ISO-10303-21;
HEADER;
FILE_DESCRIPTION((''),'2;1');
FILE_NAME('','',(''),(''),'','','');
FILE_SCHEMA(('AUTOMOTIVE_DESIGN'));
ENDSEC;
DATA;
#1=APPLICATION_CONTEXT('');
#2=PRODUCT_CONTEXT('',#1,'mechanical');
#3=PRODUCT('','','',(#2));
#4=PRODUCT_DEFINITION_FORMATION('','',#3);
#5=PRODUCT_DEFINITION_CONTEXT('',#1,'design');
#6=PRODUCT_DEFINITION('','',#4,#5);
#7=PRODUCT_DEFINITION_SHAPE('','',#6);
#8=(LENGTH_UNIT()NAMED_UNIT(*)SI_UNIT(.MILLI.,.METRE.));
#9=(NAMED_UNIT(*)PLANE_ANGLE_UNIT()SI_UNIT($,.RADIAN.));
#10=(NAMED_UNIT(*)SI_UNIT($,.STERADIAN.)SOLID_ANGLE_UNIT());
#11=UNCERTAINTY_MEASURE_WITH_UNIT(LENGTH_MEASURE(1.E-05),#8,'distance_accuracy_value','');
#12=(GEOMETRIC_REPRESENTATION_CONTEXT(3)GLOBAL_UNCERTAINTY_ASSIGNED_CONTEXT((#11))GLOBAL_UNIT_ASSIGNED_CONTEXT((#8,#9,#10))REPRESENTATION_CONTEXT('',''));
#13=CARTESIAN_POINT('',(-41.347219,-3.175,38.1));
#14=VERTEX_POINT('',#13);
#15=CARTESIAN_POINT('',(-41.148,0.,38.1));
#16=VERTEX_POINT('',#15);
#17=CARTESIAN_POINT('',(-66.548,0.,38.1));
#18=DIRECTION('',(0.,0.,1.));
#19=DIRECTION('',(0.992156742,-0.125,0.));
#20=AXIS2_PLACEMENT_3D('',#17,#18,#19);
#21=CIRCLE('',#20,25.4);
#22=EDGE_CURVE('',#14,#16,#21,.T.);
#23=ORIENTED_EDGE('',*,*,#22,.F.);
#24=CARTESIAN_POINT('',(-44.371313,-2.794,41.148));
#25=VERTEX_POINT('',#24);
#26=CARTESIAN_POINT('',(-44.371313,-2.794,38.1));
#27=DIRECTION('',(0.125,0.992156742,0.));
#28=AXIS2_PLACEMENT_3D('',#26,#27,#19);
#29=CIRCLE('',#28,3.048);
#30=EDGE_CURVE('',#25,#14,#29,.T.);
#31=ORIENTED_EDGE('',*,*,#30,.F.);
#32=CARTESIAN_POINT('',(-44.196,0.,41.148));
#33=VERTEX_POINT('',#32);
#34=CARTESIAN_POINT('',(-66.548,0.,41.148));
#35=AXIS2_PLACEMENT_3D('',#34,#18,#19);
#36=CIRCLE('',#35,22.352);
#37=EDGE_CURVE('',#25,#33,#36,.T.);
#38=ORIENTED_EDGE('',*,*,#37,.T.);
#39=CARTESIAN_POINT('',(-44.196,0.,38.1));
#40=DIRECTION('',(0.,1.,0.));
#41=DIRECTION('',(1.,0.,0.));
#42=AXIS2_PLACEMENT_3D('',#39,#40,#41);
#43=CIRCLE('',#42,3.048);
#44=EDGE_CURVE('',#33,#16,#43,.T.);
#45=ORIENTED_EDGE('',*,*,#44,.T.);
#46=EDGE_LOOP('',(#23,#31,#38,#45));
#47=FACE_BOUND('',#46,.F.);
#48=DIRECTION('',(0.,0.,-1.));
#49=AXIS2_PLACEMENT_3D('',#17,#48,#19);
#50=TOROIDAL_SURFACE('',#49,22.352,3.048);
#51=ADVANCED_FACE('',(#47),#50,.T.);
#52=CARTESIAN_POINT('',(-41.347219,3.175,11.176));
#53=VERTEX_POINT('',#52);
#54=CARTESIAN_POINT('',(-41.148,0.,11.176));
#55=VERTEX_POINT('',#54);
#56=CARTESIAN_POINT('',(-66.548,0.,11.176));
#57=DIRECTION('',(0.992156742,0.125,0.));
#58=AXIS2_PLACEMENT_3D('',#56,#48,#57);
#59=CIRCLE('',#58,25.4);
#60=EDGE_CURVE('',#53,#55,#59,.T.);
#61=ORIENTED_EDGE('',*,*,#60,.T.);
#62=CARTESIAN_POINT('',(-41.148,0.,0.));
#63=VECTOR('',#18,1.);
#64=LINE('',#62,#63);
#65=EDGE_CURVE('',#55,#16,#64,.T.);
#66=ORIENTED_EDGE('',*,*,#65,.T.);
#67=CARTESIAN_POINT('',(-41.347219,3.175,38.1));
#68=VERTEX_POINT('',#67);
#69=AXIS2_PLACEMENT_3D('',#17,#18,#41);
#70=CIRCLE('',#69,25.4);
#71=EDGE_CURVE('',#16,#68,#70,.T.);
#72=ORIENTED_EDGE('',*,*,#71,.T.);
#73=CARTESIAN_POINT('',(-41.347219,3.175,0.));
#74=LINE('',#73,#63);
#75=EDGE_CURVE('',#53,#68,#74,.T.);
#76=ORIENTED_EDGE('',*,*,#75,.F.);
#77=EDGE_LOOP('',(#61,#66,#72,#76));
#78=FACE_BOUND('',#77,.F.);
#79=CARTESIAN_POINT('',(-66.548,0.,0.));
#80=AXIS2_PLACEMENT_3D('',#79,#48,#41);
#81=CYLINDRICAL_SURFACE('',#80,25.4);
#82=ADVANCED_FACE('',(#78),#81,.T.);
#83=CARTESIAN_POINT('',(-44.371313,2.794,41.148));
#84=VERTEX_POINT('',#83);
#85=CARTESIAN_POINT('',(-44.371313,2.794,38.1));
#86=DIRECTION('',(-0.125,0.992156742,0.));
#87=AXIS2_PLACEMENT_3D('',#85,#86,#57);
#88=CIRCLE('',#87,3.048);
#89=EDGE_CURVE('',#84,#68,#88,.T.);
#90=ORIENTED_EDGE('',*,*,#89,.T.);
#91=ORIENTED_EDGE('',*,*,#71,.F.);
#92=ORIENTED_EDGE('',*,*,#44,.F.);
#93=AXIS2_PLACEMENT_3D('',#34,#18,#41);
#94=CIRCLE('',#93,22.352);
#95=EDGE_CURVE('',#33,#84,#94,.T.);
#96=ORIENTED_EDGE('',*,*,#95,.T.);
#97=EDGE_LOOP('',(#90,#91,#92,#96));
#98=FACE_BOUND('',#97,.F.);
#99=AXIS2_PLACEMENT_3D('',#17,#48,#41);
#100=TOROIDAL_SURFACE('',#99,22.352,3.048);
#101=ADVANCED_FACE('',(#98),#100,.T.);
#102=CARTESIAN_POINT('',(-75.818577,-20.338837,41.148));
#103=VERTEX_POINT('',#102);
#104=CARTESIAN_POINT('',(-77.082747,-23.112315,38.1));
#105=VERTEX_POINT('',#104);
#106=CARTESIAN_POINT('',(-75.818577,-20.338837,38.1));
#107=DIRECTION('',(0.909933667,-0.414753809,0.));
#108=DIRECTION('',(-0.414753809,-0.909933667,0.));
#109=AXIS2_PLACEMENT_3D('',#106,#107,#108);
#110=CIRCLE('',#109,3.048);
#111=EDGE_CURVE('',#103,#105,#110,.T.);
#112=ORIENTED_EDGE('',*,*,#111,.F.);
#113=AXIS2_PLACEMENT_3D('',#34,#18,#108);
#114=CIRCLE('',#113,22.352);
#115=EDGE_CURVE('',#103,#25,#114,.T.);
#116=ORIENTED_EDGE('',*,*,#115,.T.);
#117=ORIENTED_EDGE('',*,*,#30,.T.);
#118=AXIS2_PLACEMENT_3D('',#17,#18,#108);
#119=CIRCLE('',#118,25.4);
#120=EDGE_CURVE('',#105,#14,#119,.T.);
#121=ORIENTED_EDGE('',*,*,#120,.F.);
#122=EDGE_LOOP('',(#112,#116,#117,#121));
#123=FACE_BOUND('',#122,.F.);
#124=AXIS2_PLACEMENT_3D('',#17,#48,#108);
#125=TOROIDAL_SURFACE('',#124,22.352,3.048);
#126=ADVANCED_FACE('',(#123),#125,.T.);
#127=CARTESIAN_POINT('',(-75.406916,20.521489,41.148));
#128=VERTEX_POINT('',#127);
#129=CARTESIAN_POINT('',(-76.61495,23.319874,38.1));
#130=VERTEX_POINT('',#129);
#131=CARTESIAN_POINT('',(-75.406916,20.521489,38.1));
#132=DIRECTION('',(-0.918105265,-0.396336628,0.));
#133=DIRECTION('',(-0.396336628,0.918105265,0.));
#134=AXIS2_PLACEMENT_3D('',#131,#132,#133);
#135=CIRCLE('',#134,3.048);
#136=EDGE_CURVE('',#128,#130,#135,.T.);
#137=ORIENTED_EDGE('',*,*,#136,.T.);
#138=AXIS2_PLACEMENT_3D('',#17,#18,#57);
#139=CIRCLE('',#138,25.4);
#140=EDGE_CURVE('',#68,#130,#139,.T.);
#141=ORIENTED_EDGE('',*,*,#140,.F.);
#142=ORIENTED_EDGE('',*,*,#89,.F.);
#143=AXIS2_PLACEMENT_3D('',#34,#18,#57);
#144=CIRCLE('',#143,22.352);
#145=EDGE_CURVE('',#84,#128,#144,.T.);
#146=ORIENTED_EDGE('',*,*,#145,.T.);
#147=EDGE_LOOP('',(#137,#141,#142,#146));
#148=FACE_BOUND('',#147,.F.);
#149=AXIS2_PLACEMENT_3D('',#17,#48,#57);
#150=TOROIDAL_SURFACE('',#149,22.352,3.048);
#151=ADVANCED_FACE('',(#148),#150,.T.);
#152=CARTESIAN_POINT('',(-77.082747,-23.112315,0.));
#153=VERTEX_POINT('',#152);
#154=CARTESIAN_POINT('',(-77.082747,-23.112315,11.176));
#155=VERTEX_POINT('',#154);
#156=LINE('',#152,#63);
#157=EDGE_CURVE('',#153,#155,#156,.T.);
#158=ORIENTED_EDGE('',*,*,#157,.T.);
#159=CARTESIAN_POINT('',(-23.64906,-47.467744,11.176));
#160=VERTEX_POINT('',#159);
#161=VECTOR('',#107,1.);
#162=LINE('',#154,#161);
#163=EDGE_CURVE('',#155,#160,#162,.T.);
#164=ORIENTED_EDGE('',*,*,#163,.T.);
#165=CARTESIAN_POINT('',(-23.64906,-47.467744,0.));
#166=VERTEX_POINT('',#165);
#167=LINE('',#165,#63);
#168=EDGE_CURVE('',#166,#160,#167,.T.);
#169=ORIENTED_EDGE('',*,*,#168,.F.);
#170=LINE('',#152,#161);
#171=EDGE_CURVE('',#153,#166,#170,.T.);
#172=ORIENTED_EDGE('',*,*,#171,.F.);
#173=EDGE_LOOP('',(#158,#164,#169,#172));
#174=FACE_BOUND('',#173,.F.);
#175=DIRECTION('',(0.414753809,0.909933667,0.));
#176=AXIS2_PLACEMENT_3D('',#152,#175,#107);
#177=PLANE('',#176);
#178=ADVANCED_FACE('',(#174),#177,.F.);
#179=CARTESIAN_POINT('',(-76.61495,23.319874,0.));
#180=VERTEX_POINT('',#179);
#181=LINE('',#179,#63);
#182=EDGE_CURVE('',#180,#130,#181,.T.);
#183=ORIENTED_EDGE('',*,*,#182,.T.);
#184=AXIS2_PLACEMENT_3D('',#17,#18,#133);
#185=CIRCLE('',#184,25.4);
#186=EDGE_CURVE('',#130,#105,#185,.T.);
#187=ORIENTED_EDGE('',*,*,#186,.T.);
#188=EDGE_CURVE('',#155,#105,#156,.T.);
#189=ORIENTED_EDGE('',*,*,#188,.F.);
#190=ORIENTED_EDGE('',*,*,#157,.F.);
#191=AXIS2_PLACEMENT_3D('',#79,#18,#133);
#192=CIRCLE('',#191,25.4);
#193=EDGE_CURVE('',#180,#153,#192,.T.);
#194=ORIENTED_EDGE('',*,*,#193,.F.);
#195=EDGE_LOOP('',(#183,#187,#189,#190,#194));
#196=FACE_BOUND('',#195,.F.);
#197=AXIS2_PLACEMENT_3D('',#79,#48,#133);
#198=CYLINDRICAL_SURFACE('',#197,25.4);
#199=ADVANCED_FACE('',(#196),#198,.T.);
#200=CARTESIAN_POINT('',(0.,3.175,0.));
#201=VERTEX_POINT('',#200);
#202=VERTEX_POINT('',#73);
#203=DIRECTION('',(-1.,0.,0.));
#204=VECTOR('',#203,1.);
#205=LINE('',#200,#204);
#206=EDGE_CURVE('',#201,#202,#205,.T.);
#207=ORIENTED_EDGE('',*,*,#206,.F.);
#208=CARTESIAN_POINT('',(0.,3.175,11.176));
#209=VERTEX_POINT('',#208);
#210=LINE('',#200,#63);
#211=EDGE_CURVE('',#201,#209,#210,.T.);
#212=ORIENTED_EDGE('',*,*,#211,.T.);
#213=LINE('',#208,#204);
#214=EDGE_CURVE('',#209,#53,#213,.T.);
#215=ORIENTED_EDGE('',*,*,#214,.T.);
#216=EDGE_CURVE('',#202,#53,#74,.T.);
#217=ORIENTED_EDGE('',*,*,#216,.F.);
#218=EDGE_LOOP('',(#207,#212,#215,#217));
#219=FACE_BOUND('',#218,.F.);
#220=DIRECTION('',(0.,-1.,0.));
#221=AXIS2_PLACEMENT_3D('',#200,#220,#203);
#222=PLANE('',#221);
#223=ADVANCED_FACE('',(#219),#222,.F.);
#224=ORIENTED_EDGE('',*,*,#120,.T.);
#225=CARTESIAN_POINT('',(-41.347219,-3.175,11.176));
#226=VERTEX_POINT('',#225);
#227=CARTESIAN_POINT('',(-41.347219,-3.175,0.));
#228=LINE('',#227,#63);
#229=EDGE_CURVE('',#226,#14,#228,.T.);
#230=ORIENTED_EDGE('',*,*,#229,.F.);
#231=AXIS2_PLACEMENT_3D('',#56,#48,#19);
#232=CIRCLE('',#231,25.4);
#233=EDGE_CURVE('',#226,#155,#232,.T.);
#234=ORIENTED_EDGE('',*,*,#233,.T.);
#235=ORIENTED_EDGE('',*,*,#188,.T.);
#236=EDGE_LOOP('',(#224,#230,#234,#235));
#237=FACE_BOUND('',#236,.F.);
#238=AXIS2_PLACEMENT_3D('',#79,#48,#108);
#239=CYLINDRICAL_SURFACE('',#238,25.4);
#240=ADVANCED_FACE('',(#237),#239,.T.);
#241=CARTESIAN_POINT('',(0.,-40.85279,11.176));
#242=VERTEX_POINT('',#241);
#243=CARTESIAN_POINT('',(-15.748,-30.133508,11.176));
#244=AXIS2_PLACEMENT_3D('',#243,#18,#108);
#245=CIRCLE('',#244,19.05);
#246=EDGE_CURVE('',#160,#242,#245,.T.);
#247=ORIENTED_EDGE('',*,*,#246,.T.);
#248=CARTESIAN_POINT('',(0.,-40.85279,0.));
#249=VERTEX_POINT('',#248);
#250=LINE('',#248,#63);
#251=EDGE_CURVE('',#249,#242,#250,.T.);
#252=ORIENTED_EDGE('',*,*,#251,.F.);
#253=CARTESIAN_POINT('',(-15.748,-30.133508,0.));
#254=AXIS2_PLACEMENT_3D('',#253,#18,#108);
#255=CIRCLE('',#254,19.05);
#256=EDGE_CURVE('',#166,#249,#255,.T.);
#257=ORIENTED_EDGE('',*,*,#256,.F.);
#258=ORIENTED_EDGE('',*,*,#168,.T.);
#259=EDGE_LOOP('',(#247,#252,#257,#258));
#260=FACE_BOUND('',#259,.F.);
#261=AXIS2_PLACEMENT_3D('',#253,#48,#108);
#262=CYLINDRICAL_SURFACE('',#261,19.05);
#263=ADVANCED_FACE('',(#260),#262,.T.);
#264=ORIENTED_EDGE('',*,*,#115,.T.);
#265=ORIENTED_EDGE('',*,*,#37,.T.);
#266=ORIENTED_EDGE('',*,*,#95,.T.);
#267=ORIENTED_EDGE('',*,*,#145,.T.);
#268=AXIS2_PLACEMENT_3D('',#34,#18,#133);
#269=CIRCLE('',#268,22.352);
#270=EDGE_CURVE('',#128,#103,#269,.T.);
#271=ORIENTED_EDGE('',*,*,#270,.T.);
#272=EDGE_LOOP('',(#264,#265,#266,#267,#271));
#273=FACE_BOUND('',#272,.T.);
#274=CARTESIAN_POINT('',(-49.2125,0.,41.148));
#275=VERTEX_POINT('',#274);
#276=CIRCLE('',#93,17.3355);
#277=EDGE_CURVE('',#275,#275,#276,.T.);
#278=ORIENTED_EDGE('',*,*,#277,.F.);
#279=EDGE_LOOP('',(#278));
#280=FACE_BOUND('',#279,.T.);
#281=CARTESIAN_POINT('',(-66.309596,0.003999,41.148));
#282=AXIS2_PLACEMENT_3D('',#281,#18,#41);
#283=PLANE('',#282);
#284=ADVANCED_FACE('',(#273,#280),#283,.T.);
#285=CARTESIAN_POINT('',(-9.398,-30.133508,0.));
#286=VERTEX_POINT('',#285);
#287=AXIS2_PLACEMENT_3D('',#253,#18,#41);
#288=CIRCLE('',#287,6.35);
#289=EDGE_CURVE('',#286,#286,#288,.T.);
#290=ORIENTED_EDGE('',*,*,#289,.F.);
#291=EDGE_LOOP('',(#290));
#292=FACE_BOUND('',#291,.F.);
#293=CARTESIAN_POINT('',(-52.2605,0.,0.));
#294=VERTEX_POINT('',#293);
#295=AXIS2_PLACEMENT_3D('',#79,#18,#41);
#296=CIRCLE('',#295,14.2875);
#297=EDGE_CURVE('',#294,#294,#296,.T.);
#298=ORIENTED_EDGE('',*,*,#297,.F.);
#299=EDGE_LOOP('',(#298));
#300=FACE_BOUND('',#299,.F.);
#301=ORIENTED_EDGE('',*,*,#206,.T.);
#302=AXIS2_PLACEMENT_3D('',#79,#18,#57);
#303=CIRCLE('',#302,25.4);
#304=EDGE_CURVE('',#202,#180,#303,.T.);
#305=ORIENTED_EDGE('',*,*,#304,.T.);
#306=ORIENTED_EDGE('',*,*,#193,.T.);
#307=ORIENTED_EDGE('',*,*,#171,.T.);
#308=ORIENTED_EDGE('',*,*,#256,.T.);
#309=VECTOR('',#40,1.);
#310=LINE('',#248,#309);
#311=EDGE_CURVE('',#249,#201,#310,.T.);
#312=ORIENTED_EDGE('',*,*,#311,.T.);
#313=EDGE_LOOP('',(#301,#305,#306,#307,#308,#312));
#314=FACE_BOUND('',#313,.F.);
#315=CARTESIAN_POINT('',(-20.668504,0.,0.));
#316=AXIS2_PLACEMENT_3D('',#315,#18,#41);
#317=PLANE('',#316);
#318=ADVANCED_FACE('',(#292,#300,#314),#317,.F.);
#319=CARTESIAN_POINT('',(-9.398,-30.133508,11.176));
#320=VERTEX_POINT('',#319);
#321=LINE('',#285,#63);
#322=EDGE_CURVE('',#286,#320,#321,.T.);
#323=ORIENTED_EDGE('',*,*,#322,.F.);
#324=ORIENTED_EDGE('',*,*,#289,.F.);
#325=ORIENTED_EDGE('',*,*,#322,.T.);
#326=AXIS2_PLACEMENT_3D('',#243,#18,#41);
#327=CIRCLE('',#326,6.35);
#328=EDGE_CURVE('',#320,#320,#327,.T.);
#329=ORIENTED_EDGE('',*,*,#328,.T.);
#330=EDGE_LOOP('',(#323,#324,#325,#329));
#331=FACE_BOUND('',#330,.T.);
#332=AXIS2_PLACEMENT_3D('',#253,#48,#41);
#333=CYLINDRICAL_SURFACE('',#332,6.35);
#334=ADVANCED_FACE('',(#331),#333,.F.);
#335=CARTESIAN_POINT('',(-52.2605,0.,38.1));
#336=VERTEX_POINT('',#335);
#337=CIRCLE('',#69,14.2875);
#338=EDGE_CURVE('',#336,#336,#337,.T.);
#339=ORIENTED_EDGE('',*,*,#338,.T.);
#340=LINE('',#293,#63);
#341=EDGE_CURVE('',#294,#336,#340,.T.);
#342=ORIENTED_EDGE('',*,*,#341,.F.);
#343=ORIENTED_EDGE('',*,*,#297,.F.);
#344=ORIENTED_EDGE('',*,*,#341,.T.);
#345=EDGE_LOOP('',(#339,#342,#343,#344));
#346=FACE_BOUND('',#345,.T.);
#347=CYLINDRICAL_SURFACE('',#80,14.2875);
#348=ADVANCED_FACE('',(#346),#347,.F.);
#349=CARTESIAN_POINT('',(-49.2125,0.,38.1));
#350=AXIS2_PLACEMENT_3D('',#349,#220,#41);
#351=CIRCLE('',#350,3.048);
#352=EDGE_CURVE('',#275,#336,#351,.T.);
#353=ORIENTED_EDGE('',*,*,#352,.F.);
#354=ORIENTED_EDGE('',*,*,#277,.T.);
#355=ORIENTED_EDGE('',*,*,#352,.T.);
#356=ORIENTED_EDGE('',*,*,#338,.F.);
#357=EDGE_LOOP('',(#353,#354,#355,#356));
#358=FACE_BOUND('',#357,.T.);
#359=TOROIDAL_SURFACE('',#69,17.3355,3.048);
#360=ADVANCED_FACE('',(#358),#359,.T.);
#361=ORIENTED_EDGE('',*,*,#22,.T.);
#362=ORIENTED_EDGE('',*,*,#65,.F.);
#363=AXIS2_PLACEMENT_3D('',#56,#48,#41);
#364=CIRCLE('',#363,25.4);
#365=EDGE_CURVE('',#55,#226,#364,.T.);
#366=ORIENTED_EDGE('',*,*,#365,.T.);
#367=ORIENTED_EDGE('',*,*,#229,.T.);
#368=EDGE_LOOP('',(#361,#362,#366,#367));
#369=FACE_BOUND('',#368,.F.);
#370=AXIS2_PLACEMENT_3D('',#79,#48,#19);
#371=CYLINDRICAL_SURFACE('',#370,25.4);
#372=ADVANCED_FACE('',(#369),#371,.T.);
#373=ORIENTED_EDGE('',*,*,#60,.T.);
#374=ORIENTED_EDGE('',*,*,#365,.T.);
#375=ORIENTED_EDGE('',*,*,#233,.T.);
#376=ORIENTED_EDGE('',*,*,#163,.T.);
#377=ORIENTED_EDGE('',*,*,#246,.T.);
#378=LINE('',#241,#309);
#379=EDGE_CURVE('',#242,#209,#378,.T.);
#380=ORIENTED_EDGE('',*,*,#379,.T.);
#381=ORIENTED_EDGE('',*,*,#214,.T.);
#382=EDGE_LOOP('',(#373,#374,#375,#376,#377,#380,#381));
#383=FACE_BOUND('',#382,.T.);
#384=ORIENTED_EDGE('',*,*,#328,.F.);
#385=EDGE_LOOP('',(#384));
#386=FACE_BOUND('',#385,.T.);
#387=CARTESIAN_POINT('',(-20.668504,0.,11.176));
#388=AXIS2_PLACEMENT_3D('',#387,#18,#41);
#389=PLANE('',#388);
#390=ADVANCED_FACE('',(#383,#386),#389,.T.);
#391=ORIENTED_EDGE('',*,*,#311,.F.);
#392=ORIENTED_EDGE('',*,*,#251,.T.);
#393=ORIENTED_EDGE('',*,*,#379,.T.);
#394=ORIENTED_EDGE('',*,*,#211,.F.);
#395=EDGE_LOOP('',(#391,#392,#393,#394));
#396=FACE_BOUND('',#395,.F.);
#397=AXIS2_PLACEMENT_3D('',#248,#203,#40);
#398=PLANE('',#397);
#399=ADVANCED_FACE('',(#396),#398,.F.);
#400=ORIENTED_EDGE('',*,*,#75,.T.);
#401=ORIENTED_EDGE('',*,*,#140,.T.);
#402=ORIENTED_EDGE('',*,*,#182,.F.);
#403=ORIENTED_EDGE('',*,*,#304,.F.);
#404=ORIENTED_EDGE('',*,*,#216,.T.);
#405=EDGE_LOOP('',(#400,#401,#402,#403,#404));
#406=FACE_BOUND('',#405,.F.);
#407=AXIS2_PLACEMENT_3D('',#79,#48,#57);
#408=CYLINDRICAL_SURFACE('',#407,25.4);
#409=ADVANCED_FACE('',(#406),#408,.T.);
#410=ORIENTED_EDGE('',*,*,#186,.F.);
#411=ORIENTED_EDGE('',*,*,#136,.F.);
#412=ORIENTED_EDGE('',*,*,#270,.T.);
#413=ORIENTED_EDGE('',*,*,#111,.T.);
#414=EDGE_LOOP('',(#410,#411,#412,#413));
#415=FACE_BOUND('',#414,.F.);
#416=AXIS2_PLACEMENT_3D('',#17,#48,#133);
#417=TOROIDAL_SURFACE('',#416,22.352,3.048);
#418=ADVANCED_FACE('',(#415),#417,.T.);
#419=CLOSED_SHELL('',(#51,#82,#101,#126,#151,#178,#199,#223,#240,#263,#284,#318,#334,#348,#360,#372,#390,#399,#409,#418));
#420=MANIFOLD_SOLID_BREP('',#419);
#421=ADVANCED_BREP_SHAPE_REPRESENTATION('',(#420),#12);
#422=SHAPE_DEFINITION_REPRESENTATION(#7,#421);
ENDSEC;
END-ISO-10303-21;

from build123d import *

# Parameters (mm, degrees)
F0_R     = 6.35
F1_DEPTH = 11.176
F0_R_2   = 16.256
F0_R_3   = 14.2875
F2_DEPTH = 41.148
F3_R     = 3.048
F4_R     = 3.048


with BuildPart() as f1:
    # F0 (on Top) → F1 (new body)
    with BuildSketch(Plane.XY):
        with BuildLine():
            ThreePointArc((-41.3472187621, 3.175), (-41.1978536154, 1.5906219786), (-41.148, 0))
            ThreePointArc((-41.148, 0), (-41.1978536154, -1.5906219786), (-41.3472187621, -3.175))
            Line((-41.3472187621, -3.175), (0, -3.175))
            Line((0, -3.175), (0, 0))
            Line((0, 0), (0, 3.175))
            Line((0, 3.175), (-41.3472187621, 3.175))
        make_face()
        with BuildLine():
            Line((0, -3.175), (-41.3472187621, -3.175))
            ThreePointArc((-41.3472187621, -3.175), (-54.1727312933, -22.1813598419), (-77.0827467531, -23.1123151339))
            Line((-77.0827467531, -23.1123151339), (-23.6490600649, -47.4677444402))
            ThreePointArc((-23.6490600649, -47.4677444402), (-10.6164287508, -48.4793380387), (0, -40.8527895955))
            Line((0, -40.8527895955), (0, -3.175))
        make_face()
        with Locations((-15.748, -30.1335080897)):
            Circle(F0_R, mode=Mode.SUBTRACT)
    extrude(amount=F1_DEPTH)

    # F0 (on Top) → F2 (join)
    with BuildSketch(Plane.XY):
        with BuildLine():
            ThreePointArc((-41.3472187621, -3.175), (-41.1978536154, -1.5906219786), (-41.148, 0))
            ThreePointArc((-41.148, 0), (-41.1978536154, 1.5906219786), (-41.3472187621, 3.175))
            ThreePointArc((-41.3472187621, 3.175), (-53.9498972239, 22.0555618029), (-76.6149503625, 23.3198737218))
            ThreePointArc((-76.6149503625, 23.3198737218), (-91.9467110203, 0.2558876856), (-77.0827467531, -23.1123151339))
            ThreePointArc((-77.0827467531, -23.1123151339), (-54.1727312933, -22.1813598419), (-41.3472187621, -3.175))
        make_face()
        with Locations((-66.548, 0)):
            Circle(F0_R_2, mode=Mode.SUBTRACT)
        with Locations((-66.548, 0)):
            Circle(F0_R_2)
        with Locations((-66.548, 0)):
            Circle(F0_R_3, mode=Mode.SUBTRACT)
    extrude(amount=F2_DEPTH)

    # F3
    f3_edges = [f1.edges().sort_by_distance(p)[0] for p in [
        (-91.748781, 3.175, 41.148),
    ]]
    fillet(f3_edges, radius=F3_R)

    # F4
    f4_edges = [f1.edges().sort_by_distance(p)[0] for p in [
        (-80.8355, 0, 41.148),
    ]]
    fillet(f4_edges, radius=F4_R)


solid = f1.part
